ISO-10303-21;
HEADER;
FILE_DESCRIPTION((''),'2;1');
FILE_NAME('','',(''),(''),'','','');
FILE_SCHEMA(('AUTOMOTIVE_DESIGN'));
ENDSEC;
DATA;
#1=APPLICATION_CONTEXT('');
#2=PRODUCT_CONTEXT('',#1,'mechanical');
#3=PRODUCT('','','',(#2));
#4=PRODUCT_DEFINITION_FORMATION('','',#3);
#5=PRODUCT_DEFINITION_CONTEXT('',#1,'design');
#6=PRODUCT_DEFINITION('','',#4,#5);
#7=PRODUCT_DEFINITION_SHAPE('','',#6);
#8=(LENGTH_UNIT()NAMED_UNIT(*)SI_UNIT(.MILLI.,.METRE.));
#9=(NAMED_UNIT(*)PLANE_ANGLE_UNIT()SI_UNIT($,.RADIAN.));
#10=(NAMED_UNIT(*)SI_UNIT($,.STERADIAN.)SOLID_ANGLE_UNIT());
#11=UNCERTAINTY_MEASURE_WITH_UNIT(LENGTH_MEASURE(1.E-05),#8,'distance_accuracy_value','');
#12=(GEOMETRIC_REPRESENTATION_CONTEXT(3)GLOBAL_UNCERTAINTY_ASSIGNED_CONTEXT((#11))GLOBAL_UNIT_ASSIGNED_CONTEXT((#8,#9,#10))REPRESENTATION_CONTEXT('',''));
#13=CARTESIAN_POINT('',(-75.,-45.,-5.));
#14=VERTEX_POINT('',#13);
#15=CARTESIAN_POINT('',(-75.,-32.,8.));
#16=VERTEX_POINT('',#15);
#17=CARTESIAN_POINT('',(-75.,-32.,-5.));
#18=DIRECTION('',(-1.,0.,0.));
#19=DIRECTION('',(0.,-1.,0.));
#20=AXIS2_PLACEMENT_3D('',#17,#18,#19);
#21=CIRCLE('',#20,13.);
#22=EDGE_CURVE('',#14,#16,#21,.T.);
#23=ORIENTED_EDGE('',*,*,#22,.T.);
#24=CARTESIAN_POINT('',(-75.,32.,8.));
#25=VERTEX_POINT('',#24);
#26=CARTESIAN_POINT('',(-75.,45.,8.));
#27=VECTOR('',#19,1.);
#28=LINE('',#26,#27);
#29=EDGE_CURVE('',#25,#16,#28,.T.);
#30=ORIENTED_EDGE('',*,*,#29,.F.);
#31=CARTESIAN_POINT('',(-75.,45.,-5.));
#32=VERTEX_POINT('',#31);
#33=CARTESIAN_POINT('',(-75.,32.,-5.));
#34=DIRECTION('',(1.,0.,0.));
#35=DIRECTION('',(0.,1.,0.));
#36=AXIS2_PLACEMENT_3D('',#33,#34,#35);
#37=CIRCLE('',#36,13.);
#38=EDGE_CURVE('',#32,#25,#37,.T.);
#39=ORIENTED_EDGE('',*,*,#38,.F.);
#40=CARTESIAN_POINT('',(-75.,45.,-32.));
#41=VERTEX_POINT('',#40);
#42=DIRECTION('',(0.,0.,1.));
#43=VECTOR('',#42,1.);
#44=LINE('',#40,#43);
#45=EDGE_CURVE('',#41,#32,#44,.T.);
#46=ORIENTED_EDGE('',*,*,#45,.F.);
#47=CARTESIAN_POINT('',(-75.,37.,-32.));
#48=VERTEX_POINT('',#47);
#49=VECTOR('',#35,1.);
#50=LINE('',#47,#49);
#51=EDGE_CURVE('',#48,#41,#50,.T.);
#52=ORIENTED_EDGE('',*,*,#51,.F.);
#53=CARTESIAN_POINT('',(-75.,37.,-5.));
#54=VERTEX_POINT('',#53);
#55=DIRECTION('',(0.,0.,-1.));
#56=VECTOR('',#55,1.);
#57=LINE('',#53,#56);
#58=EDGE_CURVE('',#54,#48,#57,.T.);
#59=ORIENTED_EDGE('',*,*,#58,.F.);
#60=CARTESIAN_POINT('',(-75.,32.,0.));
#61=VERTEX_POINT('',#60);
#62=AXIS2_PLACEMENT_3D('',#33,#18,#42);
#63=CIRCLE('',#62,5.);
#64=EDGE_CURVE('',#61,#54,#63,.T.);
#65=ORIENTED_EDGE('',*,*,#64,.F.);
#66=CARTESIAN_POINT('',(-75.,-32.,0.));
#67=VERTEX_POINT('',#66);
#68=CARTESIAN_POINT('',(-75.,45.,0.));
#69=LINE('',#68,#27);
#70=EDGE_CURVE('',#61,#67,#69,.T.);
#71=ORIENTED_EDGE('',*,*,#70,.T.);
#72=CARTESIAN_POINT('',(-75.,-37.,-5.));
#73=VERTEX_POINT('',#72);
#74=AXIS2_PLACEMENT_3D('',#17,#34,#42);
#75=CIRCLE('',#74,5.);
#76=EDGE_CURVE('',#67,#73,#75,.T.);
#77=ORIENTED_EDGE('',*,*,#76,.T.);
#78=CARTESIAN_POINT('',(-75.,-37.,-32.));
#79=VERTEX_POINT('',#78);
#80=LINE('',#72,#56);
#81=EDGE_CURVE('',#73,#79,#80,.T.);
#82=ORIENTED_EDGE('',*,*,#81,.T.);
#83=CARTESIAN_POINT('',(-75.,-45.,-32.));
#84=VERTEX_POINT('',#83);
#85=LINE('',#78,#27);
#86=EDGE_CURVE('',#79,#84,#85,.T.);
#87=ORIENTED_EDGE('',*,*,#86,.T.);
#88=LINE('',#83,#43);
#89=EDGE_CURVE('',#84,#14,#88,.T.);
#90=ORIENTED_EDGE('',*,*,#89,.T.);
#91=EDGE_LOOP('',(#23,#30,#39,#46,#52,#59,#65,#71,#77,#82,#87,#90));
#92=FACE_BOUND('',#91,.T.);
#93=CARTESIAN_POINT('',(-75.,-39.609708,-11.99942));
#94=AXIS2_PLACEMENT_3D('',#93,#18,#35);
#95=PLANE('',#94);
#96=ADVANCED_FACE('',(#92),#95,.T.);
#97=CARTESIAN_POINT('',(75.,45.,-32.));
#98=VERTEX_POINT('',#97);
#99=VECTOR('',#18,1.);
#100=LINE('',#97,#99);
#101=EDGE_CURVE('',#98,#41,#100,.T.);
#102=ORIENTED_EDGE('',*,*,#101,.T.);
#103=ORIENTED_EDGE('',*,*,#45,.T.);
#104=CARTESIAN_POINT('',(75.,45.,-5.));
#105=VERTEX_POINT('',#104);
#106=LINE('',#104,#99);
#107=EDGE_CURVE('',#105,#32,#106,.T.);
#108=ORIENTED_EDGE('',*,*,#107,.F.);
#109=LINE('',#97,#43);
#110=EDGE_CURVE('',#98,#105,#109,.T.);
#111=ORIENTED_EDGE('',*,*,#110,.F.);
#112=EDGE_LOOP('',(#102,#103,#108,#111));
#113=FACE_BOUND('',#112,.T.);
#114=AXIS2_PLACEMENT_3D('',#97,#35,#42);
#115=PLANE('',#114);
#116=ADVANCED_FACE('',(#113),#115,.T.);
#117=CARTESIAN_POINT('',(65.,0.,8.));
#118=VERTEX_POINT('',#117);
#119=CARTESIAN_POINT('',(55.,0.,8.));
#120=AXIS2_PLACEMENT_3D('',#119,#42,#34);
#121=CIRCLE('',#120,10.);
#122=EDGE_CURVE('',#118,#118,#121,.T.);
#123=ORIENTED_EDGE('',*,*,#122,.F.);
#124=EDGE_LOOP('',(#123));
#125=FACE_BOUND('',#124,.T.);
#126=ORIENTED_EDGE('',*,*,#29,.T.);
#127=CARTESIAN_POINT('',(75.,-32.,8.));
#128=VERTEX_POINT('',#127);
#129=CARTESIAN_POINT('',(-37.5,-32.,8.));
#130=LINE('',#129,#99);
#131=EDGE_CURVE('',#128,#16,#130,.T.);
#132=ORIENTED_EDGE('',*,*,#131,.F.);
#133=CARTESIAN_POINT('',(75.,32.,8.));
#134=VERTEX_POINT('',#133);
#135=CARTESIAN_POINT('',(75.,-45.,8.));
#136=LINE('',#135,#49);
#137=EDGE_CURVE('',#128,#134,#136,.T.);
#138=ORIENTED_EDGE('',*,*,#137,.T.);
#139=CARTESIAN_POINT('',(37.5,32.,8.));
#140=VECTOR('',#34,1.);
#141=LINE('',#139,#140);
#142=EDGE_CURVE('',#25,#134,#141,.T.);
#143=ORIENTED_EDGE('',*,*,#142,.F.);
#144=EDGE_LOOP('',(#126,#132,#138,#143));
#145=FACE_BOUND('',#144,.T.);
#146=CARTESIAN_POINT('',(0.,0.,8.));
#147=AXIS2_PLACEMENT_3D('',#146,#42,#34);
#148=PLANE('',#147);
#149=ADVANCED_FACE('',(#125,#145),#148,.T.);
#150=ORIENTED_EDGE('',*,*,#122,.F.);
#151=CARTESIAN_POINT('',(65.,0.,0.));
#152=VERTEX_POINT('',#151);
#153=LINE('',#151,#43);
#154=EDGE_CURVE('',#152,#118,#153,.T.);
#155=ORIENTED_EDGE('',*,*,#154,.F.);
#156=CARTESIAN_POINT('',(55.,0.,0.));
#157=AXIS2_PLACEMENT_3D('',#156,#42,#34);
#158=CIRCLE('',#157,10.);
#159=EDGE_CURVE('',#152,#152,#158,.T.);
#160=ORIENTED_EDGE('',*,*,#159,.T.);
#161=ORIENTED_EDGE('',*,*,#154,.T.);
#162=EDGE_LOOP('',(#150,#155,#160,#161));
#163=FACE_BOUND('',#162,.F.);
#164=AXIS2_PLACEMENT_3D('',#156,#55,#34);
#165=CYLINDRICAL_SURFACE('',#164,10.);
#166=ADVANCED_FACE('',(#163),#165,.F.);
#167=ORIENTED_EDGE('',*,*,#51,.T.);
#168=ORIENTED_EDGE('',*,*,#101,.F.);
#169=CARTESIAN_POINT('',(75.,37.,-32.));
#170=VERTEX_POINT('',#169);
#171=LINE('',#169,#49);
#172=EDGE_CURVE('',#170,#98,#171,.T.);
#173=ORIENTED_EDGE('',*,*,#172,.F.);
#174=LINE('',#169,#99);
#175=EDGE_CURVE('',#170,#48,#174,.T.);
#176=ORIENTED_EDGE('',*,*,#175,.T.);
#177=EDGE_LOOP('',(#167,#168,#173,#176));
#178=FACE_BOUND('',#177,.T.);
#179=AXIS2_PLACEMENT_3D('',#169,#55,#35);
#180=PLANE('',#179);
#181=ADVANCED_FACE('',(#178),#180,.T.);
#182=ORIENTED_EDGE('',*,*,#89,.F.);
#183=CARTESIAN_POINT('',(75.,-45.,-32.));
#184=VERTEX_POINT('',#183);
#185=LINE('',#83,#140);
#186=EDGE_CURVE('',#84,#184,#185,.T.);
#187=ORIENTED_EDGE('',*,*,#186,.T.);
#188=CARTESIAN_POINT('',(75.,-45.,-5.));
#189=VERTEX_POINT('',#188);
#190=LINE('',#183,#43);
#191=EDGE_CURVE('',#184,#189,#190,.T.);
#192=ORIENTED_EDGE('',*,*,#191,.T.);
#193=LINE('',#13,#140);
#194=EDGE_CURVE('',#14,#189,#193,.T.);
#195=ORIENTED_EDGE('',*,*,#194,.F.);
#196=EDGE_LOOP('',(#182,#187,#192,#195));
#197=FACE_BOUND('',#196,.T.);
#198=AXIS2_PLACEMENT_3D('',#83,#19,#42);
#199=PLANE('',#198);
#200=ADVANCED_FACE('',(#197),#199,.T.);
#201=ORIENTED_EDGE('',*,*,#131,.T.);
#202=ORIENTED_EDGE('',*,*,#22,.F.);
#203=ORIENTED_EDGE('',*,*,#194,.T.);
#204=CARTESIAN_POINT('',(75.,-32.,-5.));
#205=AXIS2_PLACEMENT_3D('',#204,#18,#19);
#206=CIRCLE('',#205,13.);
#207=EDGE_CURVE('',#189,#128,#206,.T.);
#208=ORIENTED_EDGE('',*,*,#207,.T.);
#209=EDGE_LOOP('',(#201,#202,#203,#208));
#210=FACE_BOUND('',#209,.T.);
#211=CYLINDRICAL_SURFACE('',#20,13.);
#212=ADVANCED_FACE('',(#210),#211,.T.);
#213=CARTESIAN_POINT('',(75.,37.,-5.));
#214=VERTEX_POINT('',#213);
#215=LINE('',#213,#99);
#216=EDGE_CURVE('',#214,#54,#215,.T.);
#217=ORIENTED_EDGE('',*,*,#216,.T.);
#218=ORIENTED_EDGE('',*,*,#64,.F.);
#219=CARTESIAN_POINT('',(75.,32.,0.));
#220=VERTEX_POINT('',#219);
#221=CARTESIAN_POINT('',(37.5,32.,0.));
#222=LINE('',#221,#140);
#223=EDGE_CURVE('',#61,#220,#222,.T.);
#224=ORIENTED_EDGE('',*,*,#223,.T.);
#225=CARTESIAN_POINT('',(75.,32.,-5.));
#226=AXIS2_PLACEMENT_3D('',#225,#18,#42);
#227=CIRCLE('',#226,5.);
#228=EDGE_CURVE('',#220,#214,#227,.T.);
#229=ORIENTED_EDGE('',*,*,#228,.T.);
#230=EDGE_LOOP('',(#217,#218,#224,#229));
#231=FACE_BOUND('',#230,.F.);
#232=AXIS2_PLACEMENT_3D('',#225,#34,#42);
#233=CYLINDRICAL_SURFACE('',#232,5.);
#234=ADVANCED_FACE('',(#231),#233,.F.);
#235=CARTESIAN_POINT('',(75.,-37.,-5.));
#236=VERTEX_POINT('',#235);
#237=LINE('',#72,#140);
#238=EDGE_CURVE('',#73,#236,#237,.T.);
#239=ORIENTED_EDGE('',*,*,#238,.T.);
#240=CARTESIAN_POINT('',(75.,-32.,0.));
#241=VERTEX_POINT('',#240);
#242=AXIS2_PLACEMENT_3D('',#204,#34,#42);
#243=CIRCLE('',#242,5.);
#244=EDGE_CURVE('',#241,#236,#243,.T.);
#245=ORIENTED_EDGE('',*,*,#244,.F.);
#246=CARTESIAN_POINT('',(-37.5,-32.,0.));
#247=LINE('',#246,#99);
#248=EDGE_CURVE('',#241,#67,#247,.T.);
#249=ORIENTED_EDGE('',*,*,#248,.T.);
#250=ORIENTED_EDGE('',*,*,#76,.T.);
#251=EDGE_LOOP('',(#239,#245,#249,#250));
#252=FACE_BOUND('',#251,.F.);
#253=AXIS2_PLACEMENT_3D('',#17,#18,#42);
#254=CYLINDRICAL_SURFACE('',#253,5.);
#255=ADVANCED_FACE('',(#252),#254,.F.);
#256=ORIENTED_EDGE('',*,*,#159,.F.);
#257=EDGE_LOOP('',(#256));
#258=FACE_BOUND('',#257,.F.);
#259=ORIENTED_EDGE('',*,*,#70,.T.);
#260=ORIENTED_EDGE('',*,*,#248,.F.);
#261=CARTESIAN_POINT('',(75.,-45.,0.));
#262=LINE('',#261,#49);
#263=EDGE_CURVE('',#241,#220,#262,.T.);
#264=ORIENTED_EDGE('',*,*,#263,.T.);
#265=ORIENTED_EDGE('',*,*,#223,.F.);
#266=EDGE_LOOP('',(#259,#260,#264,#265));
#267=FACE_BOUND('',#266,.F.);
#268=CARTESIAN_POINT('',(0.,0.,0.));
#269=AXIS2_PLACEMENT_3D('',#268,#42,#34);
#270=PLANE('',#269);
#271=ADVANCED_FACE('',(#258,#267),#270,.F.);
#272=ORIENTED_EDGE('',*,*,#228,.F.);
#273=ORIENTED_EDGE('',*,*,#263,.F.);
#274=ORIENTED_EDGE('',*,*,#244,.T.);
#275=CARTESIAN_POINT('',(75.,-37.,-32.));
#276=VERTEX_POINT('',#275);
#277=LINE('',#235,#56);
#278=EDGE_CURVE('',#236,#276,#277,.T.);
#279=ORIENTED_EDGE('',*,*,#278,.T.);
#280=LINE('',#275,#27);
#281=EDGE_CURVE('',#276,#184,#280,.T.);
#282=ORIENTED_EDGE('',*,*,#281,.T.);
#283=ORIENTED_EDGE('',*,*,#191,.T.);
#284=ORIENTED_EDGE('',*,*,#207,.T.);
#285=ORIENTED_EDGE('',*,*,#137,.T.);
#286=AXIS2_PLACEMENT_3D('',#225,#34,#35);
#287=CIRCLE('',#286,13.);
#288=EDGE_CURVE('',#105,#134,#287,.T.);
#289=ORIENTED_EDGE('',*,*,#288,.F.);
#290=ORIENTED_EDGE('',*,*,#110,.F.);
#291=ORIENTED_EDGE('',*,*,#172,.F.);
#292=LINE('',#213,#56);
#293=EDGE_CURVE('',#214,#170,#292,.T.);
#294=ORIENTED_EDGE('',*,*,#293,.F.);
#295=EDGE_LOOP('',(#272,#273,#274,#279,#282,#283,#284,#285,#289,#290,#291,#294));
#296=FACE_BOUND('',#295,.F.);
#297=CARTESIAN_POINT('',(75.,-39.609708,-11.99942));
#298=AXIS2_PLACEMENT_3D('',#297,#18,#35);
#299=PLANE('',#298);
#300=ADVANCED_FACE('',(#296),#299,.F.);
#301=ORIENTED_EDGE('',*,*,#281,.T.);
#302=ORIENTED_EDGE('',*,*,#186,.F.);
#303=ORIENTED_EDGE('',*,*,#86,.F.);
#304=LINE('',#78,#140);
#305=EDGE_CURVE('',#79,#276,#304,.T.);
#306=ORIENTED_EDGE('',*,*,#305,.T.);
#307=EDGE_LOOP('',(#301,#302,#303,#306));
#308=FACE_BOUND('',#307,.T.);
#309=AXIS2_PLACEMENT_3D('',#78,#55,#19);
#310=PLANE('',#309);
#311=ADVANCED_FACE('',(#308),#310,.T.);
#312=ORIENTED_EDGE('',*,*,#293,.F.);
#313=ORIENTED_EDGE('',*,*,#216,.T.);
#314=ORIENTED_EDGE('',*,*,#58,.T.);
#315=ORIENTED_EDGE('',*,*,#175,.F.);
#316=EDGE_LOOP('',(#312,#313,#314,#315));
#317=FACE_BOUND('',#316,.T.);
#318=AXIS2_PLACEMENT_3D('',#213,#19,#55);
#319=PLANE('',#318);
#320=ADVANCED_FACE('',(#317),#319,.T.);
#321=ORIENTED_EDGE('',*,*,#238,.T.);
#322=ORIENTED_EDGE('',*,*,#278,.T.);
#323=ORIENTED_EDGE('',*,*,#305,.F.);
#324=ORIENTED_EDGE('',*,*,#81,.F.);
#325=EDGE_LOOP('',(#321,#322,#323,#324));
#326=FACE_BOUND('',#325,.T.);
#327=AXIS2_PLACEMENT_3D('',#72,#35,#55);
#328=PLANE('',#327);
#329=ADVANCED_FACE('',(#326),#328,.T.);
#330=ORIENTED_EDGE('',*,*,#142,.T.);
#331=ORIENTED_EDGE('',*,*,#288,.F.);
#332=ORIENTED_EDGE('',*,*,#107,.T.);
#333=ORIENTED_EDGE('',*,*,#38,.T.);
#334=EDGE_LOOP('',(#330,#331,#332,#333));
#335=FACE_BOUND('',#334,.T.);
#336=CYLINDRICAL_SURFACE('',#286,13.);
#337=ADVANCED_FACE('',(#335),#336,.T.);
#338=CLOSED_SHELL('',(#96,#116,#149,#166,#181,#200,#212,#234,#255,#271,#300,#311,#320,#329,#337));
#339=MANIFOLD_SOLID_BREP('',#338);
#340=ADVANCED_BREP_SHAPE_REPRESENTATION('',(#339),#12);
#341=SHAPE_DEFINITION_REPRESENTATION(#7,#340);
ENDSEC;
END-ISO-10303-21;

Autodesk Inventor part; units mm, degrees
ref_plane "YZ Plane" through (0, 0, 0) normal (1, 0, 0) x (0, 1, 0)
ref_plane "XZ Plane" through (0, 0, 0) normal (0, 1, 0) x (-1, 0, 0)
ref_plane "XY Plane" through (0, 0, 0) normal (0, 0, 1) x (1, 0, 0)
sketch "Sketch1" plane through (0, 0, 0) normal (0, 0, 1) x (1, 0, 0)
  line L0 (-75, -45) -> (75, -45)
  line L1 (75, -45) -> (75, 45)
  line L2 (75, 45) -> (-75, 45)
  line L3 (-75, 45) -> (-75, -45)
  line L4 (-75, -45) -> (75, 45) construction
  line L5 (75, -45) -> (-75, 45) construction
  circle A0 centre (55, -25) radius 10
  circle A1 centre (55, 25) radius 10
  line L6 (0, 0) -> (75, 0) construction
  circle A2 centre (55, 0) radius 10
  dimension "d0" = 150
  dimension "d1" = 90
  dimension "d23" = 20
  dimension "d25" = 20
  dimension "d26" = 20
extrude "Plate1" add sketch "Sketch1" along normal blind 8 contours L3 L2 L1 L0 | A0 | A1
sketch "Sketch6" plane through (-75, -37, 8) normal (0, -1, 0) x (1, 0, 0)
  line L0 (150, 0) -> (0, 0)
  line L1 (0, 0) -> (0, -40)
  line L2 (0, -40) -> (150, -40)
  line L3 (150, -40) -> (150, 0)
edge flange "Flange2" height 40 angle 90 thickness 8 bend radius 5 thickness toward (0, -1, 0) relief round relief width 8 relief depth 4 corner gap 5 corner form 0 edges at (0, -45, 0) (0, 45, 0) wall of the first edge with corners at (75, -37, 8) (-75, -37, 8) (-75, -37, -32) (75, -37, -32)
bend "Bend2"
corner "Corner2"
equation "\"d26\" = d25"
equation "\"d2\" = Thickness"
equation "\"d30\" = BendReliefWidth"
equation "\"d31\" = BendReliefDepth"
equation "\"d32\" = MinimumRemnant"
equation "\"d33\" = TransitionRadius"
equation "\"d36\" = BendRadius"
equation "\"d37\" = CornerReliefSize"
equation "\"d38\" = GapSize"
equation "\"d39\" = JacobiRadiusSize"
equation "\"BendReliefWidth\" = Thickness"
equation "\"BendReliefDepth\" = 0.5 * Thickness"
equation "\"CornerReliefSize\" = 4 * Thickness"
equation "\"MinimumRemnant\" = 2 * Thickness"
equation "\"TransitionRadius\" = BendRadius"
equation "\"JacobiRadiusSize\" = BendRadius"
equation "\"GapSize\" = Thickness"
equation "\"Thickness\" = 8"
equation "\"BendRadius\" = 5"
properties part number "PNS 1785 leg floor channel" material "Steel"
